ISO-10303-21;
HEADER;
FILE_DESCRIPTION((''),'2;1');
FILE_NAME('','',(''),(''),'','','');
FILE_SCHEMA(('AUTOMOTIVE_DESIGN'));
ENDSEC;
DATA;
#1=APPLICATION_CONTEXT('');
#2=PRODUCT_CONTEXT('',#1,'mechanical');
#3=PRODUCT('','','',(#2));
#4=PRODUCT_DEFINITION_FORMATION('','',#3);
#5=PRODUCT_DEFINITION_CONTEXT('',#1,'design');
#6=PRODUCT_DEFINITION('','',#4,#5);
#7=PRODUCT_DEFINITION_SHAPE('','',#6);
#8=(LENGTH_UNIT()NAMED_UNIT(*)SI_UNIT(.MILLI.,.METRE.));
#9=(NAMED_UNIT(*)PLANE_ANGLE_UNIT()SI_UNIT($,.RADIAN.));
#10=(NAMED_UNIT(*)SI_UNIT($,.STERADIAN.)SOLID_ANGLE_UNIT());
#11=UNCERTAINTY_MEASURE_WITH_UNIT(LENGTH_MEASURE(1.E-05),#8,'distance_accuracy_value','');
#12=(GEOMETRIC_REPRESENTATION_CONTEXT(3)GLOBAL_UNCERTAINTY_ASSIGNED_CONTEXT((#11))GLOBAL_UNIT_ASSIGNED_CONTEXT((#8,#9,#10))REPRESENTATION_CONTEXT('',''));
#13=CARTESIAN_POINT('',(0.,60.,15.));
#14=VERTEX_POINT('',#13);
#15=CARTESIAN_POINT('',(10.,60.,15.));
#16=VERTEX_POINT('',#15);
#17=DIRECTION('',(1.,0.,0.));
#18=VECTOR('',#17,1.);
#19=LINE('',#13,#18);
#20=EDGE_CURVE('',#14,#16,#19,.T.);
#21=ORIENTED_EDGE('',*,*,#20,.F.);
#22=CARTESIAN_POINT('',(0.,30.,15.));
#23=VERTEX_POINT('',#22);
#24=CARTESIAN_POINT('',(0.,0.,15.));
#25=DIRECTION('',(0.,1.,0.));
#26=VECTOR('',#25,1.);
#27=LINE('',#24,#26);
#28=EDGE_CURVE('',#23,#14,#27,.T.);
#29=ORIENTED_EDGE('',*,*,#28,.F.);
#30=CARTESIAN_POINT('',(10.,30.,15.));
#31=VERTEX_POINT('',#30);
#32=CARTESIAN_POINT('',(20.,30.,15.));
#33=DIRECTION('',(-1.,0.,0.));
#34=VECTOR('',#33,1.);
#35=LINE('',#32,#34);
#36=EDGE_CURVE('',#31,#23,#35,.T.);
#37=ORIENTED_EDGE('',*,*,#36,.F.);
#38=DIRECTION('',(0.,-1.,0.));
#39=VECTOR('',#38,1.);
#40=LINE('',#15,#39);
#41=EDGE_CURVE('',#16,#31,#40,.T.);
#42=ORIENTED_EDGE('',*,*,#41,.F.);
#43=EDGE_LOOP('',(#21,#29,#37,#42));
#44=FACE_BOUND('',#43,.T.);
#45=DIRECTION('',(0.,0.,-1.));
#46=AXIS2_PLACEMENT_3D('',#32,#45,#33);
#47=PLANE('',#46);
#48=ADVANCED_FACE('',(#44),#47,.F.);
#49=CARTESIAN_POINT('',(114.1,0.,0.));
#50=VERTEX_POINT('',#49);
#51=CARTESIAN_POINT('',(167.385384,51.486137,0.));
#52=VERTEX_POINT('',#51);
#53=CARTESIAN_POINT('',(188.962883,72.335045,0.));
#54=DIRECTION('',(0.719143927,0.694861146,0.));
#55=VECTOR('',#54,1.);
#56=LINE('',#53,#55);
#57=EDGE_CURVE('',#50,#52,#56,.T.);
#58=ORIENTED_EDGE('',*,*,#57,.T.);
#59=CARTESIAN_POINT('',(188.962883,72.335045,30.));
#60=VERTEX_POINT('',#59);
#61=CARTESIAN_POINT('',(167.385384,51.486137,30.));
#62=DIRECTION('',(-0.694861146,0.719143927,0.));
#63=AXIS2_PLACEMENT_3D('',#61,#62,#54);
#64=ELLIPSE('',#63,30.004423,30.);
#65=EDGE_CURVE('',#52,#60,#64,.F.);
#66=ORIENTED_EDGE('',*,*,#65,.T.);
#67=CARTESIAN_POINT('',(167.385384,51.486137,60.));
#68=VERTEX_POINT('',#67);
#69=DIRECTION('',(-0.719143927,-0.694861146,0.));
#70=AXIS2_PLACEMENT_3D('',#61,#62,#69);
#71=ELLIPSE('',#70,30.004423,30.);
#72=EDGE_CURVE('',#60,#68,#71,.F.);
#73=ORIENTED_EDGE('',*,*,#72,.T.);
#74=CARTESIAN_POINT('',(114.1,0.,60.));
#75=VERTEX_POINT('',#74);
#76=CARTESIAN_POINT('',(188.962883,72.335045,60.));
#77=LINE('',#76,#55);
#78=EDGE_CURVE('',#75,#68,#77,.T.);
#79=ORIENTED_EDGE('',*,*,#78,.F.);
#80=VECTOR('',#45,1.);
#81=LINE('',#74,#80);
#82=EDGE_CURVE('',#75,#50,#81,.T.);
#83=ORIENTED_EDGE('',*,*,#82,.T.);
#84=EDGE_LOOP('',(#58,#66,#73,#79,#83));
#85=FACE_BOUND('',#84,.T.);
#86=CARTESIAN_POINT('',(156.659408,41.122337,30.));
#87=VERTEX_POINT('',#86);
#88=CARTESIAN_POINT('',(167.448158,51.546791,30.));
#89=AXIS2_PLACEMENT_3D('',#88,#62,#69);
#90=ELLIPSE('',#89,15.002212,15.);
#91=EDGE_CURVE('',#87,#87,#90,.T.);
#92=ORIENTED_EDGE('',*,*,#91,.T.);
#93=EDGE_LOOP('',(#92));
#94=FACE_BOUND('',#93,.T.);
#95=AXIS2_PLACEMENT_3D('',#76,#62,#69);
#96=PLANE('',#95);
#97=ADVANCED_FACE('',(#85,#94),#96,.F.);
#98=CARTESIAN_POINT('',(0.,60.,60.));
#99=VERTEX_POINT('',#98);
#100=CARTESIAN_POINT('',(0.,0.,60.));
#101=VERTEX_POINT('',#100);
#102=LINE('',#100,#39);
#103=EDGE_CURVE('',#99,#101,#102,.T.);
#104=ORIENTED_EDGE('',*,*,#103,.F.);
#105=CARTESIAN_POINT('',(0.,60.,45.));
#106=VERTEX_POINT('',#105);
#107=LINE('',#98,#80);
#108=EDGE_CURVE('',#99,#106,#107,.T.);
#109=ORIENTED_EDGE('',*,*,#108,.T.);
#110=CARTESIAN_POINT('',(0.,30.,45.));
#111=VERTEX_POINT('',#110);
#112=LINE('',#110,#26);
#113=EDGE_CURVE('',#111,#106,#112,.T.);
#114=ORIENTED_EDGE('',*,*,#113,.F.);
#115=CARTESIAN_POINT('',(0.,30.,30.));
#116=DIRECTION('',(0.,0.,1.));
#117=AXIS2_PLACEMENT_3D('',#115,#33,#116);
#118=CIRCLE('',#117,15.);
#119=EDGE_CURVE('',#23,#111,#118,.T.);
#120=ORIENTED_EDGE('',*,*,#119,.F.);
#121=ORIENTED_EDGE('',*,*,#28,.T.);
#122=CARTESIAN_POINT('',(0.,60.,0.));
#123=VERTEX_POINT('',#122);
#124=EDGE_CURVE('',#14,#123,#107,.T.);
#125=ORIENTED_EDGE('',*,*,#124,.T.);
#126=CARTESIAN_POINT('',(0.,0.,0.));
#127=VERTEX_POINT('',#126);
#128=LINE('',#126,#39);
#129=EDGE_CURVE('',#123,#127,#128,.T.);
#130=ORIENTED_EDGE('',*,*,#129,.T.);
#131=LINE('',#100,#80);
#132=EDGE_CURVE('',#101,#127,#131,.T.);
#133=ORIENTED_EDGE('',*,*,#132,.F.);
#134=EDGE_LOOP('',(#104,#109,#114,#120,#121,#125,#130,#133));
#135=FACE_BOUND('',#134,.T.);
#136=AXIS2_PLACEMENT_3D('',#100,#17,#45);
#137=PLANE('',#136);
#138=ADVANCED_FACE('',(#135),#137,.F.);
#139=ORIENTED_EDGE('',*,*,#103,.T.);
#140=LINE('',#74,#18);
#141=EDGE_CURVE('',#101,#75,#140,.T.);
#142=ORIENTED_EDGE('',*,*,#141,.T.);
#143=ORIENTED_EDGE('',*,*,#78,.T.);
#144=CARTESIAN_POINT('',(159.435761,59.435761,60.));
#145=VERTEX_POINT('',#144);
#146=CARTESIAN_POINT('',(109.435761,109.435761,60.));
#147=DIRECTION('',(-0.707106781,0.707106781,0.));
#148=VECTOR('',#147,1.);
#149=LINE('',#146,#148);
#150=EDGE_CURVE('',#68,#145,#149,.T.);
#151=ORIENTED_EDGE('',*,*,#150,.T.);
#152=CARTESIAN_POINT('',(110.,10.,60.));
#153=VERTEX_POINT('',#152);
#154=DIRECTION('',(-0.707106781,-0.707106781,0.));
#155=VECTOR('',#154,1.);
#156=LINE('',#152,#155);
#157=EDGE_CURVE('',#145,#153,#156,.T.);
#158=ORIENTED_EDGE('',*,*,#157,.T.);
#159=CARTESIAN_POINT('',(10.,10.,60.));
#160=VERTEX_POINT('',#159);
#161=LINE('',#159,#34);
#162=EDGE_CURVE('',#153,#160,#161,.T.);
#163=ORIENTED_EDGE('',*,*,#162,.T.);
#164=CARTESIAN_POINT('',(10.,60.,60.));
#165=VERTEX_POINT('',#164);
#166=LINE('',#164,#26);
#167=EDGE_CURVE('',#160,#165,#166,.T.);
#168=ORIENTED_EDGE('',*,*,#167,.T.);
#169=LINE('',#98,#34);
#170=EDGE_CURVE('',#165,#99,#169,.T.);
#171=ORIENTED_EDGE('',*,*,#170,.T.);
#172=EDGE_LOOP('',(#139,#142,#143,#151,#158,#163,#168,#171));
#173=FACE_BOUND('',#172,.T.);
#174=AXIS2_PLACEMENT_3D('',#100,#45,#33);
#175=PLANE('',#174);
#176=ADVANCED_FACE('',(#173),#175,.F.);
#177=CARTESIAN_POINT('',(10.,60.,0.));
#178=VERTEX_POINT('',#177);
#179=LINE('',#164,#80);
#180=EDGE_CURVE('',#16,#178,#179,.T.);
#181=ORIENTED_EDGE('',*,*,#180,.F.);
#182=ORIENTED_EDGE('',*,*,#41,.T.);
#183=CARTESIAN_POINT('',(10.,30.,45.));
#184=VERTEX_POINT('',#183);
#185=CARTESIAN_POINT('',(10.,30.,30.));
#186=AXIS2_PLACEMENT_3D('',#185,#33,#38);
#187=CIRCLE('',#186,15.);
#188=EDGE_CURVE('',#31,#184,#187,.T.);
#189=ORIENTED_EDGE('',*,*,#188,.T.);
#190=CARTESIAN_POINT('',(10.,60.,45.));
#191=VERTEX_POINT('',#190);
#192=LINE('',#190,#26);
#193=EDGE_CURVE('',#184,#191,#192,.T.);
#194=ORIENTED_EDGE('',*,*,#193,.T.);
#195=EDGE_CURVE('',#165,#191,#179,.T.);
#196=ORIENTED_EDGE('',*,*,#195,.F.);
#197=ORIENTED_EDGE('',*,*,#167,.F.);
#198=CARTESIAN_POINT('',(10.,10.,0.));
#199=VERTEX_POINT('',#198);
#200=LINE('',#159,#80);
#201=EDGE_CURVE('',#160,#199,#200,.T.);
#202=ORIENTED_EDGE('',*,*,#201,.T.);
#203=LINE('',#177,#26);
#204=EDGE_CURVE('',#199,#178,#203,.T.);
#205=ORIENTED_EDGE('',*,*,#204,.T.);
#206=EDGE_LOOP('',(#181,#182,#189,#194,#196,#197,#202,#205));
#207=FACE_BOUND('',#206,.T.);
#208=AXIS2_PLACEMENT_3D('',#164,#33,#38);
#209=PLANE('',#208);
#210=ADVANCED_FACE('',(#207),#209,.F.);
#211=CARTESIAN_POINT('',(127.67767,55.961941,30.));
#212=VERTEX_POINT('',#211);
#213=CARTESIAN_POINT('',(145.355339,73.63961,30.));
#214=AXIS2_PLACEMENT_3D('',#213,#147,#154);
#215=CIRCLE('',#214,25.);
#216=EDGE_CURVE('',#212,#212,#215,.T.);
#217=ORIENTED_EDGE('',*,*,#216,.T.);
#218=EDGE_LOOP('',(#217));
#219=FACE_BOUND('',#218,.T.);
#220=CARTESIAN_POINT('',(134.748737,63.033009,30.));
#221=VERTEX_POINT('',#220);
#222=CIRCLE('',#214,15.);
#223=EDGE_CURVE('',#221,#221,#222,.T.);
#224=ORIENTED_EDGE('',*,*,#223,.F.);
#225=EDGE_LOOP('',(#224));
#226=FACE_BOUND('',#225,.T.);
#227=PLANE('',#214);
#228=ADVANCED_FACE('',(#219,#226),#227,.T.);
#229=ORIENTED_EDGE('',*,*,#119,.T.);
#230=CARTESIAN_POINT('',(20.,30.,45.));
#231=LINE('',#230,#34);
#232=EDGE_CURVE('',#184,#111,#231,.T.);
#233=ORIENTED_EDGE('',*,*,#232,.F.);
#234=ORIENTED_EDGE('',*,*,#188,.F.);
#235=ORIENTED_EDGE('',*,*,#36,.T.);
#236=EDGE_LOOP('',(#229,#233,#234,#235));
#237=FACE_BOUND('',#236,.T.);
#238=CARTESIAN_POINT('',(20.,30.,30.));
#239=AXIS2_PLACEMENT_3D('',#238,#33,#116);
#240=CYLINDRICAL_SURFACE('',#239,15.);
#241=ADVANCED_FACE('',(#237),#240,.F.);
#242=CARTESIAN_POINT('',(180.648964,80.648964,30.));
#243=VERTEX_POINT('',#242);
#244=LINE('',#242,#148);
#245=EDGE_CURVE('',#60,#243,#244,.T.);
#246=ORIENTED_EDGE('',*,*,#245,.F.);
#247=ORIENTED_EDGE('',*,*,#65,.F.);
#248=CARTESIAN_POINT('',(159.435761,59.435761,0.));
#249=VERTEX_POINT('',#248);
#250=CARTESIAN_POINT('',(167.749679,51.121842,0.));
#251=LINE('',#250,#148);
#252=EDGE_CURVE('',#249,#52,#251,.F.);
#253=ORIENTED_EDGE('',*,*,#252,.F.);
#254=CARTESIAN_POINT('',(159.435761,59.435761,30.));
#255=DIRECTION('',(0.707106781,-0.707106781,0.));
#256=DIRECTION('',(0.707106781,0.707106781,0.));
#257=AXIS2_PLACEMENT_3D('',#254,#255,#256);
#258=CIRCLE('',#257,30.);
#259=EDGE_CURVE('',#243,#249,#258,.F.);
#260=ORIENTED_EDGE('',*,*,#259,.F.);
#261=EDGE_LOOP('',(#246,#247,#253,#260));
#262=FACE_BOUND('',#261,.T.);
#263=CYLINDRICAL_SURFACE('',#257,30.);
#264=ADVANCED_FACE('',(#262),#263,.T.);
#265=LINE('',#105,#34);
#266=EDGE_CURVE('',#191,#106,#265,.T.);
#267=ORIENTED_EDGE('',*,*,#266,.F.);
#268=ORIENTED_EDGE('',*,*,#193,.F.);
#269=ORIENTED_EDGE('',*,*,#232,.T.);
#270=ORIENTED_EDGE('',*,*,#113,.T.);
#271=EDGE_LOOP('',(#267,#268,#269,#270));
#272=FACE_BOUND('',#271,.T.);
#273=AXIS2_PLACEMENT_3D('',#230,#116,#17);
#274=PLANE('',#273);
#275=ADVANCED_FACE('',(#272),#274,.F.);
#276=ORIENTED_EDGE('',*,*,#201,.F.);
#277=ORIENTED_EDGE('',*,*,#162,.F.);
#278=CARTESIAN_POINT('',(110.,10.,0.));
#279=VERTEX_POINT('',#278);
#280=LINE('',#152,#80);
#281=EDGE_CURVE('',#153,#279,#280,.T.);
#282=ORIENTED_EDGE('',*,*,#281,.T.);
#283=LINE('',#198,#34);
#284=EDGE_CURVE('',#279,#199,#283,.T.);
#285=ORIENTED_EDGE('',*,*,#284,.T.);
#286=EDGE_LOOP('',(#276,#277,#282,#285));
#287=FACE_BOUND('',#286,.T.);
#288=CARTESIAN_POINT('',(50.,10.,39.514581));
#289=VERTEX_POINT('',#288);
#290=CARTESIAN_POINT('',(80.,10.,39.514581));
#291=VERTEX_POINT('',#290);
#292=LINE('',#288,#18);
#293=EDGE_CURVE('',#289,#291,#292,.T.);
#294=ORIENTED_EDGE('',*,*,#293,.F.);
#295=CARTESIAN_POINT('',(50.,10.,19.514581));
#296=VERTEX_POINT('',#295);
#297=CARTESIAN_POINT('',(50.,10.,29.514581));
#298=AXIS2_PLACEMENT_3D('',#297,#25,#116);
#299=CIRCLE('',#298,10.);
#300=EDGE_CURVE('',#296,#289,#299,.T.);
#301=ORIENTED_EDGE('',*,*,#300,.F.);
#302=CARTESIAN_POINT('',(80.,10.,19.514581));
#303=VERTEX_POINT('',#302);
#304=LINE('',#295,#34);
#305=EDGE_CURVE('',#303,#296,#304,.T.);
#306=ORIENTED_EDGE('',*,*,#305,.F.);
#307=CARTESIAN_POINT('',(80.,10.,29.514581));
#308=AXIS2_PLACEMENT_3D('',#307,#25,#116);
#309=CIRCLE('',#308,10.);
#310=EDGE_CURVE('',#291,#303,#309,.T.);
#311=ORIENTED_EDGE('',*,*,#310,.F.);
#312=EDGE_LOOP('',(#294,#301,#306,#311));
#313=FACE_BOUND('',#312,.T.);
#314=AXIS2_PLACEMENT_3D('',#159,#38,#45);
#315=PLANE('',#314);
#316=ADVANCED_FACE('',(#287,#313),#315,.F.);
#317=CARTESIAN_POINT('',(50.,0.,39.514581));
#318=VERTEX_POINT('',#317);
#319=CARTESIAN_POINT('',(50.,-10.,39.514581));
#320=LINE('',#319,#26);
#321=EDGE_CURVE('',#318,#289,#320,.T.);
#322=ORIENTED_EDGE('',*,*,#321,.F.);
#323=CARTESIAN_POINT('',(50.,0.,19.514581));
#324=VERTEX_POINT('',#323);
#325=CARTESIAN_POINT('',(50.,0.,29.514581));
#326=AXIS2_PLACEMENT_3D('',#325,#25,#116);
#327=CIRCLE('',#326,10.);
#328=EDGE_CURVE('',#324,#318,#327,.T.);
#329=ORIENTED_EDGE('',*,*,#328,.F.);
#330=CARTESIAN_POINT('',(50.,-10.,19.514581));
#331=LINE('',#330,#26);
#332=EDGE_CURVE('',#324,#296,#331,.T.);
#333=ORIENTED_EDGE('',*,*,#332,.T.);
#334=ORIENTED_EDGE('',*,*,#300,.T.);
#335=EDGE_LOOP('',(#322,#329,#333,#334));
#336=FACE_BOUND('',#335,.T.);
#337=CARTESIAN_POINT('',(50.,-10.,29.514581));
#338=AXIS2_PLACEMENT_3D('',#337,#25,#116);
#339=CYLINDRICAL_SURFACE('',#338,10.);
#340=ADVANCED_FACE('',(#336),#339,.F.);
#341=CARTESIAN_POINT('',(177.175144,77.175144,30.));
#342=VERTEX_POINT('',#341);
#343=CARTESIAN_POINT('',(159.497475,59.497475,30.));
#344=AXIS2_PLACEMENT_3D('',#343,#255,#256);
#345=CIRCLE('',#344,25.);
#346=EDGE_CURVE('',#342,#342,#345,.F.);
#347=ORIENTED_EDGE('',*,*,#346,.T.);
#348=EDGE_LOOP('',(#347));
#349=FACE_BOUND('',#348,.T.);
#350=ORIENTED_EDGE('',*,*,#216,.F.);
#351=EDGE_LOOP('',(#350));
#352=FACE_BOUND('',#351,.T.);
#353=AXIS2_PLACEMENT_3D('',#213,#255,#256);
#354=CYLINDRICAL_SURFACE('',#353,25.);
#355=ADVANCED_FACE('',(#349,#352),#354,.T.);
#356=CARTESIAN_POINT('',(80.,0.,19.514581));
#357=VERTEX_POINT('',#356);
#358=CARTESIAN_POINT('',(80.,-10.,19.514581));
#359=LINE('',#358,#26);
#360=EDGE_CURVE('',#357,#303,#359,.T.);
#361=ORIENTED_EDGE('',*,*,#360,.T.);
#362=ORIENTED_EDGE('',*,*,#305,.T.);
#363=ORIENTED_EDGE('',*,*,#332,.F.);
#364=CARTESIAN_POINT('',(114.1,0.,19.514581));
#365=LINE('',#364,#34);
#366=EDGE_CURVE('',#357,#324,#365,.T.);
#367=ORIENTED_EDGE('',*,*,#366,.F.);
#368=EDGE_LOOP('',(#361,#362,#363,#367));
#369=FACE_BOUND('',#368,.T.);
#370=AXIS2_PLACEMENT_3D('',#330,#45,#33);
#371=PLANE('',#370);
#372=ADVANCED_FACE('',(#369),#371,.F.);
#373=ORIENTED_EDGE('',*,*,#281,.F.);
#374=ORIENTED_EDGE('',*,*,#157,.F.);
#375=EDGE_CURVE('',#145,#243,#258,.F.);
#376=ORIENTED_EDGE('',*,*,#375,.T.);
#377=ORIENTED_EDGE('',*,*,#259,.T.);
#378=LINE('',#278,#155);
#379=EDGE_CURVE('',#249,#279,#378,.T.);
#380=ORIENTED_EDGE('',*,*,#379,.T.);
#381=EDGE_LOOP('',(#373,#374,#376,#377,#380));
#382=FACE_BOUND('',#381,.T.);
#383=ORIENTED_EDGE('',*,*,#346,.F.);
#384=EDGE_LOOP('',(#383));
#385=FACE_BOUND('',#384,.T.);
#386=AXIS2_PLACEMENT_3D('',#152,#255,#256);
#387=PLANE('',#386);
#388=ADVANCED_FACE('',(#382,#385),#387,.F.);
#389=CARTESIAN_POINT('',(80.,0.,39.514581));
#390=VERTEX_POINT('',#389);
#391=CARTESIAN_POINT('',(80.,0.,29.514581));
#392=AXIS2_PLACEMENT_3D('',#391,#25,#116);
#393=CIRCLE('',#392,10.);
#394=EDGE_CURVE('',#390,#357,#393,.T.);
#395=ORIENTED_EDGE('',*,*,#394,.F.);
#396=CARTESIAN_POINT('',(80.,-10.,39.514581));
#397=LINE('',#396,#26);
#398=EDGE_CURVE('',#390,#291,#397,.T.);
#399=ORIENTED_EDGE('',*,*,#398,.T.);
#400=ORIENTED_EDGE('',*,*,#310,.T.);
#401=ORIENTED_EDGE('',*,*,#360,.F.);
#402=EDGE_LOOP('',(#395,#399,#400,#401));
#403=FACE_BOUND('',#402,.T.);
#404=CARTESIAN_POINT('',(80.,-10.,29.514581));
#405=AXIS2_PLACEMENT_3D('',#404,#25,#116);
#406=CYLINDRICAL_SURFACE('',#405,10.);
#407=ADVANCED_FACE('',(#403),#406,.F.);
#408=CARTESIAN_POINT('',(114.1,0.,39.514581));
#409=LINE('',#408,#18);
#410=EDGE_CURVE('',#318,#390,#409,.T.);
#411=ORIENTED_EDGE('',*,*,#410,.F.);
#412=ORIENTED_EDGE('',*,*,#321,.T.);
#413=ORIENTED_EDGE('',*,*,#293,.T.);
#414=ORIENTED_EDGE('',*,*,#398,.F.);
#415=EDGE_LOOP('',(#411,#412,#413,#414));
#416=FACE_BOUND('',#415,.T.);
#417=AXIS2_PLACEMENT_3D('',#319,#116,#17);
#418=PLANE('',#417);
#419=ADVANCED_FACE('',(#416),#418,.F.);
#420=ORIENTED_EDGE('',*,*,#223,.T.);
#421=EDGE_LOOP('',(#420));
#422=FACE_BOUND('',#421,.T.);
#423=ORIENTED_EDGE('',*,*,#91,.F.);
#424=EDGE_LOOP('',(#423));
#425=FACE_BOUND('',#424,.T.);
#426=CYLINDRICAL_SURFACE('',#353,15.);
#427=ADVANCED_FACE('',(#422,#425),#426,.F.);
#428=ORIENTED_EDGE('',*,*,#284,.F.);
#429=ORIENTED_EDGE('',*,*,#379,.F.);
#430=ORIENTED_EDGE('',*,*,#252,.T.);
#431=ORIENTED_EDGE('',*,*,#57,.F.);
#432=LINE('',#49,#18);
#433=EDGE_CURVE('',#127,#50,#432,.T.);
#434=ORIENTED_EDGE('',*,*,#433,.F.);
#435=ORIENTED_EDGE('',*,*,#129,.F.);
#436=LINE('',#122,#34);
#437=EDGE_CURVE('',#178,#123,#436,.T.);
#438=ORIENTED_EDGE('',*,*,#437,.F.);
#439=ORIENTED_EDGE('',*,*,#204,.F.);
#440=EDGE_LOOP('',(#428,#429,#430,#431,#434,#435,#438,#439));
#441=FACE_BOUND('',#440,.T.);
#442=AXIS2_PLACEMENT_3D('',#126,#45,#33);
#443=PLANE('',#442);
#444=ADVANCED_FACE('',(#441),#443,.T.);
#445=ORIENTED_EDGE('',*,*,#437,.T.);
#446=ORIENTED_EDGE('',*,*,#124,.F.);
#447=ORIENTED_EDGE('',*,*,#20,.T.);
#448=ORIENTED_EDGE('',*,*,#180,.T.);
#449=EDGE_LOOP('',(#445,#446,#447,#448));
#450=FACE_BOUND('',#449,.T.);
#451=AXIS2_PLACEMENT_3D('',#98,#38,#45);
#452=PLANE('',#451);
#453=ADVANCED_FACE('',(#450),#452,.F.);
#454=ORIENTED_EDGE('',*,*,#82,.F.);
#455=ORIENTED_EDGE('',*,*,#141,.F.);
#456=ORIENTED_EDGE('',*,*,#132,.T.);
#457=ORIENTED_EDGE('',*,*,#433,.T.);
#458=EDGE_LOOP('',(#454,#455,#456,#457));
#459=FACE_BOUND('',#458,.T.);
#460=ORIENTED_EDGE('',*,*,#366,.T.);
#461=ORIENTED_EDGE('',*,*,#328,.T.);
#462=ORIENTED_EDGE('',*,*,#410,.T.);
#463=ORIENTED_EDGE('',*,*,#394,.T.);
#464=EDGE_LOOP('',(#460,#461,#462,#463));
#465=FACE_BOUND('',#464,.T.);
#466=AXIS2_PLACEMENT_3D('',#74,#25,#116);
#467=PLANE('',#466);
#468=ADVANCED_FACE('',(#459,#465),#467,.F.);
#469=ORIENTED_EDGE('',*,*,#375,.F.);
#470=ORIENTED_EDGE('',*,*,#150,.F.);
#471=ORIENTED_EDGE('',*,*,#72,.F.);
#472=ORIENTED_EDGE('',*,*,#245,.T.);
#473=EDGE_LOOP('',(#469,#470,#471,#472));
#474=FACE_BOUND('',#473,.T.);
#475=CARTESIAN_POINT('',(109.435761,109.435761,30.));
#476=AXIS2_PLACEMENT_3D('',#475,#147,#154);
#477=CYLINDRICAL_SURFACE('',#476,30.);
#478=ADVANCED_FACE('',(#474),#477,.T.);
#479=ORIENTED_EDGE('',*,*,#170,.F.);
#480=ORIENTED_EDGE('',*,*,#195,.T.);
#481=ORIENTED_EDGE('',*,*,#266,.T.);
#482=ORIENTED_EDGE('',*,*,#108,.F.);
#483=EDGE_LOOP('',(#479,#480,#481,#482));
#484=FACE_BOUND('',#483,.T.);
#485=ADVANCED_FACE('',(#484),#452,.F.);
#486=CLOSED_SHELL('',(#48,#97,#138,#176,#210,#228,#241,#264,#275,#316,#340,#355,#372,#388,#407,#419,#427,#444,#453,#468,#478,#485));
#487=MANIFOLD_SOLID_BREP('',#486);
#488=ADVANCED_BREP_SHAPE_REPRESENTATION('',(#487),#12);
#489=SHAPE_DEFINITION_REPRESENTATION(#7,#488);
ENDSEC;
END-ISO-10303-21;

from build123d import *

# Parameters (mm, degrees)
BOSS_EXTRUDE1_DEPTH = 60
SKETCH2_R           = 25
SKETCH2_R_2         = 15
BOSS_EXTRUDE2_DEPTH = 20
FILLET1_R           = 30
CUT_EXTRUDE1_DEPTH  = 20
CUT_EXTRUDE2_DEPTH  = 20
CUT_EXTRUDE3_START  = -14
SKETCH6_R           = 15
CUT_EXTRUDE3_DEPTH  = 14


with BuildPart() as part:
    # Sketch1 → Boss-Extrude1 (new body)
    with BuildSketch(Plane.XY):
        Polygon((0, 0), (0, 60), (10, 60), (10, 10), (110, 10), (180.64896405, 80.64896405), (188.962882852, 72.335045249), (114.1, 0), align=None)
    extrude(amount=BOSS_EXTRUDE1_DEPTH)

    # Sketch2 → Boss-Extrude2 (add)
    with BuildSketch(Plane(origin=(50, -50, 0), x_dir=(0, 0, 1), z_dir=(-0.7071067811865477, 0.7071067811865474, 0))):
        with Locations(Location((30, 154.852813742, 0), (0, 0, 90))):
            Circle(SKETCH2_R)
        with Locations(Location((30, 154.852813742, 0), (0, 0, 270))):
            Circle(SKETCH2_R_2, mode=Mode.SUBTRACT)
    extrude(amount=BOSS_EXTRUDE2_DEPTH)

    # Fillet1
    fillet1_edges = [part.edges().sort_by_distance(p)[0] for p in [
        (184.805923451, 76.49200465, 60),
        (184.805923451, 76.49200465, 0),
    ]]
    fillet(fillet1_edges, radius=FILLET1_R - 0.0001)  # a hair under: the kernel refuses the full size

    # Sketch3 → Cut-Extrude1 (cut)
    with BuildSketch(Plane(origin=(0, 10, 0), x_dir=(1, 0, 0), z_dir=(0, 1, 0))):
        with BuildLine():
            Line((50, -19.514580566), (80, -19.514580566))
            ThreePointArc((80, -19.514580566), (90, -29.514580566), (80, -39.514580566))
            Line((80, -39.514580566), (50, -39.514580566))
            ThreePointArc((50, -39.514580566), (40, -29.514580566), (50, -19.514580566))
        make_face()
    extrude(amount=-CUT_EXTRUDE1_DEPTH, mode=Mode.SUBTRACT)

    # Sketch5 → Cut-Extrude2 (cut)
    with BuildSketch(Plane.ZY):
        with BuildLine():
            Line((15, 30), (15, 130))
            ThreePointArc((15, 130), (30, 145), (45, 130))
            Line((45, 130), (45, 30))
            ThreePointArc((45, 30), (30, 15), (15, 30))
        make_face()
    extrude(amount=-CUT_EXTRUDE2_DEPTH, mode=Mode.SUBTRACT)

    # Sketch6 → Cut-Extrude3 (cut)
    with BuildSketch(Plane(origin=(50, -50, 0), x_dir=(0, 0, 1), z_dir=(-0.7071067811865477, 0.7071067811865474, 0)).offset(CUT_EXTRUDE3_START)):
        with Locations(Location((30, 154.852813742, 0), (0, 0, 270))):
            Circle(SKETCH6_R)
    extrude(amount=CUT_EXTRUDE3_DEPTH, mode=Mode.SUBTRACT)


solid = part.part
